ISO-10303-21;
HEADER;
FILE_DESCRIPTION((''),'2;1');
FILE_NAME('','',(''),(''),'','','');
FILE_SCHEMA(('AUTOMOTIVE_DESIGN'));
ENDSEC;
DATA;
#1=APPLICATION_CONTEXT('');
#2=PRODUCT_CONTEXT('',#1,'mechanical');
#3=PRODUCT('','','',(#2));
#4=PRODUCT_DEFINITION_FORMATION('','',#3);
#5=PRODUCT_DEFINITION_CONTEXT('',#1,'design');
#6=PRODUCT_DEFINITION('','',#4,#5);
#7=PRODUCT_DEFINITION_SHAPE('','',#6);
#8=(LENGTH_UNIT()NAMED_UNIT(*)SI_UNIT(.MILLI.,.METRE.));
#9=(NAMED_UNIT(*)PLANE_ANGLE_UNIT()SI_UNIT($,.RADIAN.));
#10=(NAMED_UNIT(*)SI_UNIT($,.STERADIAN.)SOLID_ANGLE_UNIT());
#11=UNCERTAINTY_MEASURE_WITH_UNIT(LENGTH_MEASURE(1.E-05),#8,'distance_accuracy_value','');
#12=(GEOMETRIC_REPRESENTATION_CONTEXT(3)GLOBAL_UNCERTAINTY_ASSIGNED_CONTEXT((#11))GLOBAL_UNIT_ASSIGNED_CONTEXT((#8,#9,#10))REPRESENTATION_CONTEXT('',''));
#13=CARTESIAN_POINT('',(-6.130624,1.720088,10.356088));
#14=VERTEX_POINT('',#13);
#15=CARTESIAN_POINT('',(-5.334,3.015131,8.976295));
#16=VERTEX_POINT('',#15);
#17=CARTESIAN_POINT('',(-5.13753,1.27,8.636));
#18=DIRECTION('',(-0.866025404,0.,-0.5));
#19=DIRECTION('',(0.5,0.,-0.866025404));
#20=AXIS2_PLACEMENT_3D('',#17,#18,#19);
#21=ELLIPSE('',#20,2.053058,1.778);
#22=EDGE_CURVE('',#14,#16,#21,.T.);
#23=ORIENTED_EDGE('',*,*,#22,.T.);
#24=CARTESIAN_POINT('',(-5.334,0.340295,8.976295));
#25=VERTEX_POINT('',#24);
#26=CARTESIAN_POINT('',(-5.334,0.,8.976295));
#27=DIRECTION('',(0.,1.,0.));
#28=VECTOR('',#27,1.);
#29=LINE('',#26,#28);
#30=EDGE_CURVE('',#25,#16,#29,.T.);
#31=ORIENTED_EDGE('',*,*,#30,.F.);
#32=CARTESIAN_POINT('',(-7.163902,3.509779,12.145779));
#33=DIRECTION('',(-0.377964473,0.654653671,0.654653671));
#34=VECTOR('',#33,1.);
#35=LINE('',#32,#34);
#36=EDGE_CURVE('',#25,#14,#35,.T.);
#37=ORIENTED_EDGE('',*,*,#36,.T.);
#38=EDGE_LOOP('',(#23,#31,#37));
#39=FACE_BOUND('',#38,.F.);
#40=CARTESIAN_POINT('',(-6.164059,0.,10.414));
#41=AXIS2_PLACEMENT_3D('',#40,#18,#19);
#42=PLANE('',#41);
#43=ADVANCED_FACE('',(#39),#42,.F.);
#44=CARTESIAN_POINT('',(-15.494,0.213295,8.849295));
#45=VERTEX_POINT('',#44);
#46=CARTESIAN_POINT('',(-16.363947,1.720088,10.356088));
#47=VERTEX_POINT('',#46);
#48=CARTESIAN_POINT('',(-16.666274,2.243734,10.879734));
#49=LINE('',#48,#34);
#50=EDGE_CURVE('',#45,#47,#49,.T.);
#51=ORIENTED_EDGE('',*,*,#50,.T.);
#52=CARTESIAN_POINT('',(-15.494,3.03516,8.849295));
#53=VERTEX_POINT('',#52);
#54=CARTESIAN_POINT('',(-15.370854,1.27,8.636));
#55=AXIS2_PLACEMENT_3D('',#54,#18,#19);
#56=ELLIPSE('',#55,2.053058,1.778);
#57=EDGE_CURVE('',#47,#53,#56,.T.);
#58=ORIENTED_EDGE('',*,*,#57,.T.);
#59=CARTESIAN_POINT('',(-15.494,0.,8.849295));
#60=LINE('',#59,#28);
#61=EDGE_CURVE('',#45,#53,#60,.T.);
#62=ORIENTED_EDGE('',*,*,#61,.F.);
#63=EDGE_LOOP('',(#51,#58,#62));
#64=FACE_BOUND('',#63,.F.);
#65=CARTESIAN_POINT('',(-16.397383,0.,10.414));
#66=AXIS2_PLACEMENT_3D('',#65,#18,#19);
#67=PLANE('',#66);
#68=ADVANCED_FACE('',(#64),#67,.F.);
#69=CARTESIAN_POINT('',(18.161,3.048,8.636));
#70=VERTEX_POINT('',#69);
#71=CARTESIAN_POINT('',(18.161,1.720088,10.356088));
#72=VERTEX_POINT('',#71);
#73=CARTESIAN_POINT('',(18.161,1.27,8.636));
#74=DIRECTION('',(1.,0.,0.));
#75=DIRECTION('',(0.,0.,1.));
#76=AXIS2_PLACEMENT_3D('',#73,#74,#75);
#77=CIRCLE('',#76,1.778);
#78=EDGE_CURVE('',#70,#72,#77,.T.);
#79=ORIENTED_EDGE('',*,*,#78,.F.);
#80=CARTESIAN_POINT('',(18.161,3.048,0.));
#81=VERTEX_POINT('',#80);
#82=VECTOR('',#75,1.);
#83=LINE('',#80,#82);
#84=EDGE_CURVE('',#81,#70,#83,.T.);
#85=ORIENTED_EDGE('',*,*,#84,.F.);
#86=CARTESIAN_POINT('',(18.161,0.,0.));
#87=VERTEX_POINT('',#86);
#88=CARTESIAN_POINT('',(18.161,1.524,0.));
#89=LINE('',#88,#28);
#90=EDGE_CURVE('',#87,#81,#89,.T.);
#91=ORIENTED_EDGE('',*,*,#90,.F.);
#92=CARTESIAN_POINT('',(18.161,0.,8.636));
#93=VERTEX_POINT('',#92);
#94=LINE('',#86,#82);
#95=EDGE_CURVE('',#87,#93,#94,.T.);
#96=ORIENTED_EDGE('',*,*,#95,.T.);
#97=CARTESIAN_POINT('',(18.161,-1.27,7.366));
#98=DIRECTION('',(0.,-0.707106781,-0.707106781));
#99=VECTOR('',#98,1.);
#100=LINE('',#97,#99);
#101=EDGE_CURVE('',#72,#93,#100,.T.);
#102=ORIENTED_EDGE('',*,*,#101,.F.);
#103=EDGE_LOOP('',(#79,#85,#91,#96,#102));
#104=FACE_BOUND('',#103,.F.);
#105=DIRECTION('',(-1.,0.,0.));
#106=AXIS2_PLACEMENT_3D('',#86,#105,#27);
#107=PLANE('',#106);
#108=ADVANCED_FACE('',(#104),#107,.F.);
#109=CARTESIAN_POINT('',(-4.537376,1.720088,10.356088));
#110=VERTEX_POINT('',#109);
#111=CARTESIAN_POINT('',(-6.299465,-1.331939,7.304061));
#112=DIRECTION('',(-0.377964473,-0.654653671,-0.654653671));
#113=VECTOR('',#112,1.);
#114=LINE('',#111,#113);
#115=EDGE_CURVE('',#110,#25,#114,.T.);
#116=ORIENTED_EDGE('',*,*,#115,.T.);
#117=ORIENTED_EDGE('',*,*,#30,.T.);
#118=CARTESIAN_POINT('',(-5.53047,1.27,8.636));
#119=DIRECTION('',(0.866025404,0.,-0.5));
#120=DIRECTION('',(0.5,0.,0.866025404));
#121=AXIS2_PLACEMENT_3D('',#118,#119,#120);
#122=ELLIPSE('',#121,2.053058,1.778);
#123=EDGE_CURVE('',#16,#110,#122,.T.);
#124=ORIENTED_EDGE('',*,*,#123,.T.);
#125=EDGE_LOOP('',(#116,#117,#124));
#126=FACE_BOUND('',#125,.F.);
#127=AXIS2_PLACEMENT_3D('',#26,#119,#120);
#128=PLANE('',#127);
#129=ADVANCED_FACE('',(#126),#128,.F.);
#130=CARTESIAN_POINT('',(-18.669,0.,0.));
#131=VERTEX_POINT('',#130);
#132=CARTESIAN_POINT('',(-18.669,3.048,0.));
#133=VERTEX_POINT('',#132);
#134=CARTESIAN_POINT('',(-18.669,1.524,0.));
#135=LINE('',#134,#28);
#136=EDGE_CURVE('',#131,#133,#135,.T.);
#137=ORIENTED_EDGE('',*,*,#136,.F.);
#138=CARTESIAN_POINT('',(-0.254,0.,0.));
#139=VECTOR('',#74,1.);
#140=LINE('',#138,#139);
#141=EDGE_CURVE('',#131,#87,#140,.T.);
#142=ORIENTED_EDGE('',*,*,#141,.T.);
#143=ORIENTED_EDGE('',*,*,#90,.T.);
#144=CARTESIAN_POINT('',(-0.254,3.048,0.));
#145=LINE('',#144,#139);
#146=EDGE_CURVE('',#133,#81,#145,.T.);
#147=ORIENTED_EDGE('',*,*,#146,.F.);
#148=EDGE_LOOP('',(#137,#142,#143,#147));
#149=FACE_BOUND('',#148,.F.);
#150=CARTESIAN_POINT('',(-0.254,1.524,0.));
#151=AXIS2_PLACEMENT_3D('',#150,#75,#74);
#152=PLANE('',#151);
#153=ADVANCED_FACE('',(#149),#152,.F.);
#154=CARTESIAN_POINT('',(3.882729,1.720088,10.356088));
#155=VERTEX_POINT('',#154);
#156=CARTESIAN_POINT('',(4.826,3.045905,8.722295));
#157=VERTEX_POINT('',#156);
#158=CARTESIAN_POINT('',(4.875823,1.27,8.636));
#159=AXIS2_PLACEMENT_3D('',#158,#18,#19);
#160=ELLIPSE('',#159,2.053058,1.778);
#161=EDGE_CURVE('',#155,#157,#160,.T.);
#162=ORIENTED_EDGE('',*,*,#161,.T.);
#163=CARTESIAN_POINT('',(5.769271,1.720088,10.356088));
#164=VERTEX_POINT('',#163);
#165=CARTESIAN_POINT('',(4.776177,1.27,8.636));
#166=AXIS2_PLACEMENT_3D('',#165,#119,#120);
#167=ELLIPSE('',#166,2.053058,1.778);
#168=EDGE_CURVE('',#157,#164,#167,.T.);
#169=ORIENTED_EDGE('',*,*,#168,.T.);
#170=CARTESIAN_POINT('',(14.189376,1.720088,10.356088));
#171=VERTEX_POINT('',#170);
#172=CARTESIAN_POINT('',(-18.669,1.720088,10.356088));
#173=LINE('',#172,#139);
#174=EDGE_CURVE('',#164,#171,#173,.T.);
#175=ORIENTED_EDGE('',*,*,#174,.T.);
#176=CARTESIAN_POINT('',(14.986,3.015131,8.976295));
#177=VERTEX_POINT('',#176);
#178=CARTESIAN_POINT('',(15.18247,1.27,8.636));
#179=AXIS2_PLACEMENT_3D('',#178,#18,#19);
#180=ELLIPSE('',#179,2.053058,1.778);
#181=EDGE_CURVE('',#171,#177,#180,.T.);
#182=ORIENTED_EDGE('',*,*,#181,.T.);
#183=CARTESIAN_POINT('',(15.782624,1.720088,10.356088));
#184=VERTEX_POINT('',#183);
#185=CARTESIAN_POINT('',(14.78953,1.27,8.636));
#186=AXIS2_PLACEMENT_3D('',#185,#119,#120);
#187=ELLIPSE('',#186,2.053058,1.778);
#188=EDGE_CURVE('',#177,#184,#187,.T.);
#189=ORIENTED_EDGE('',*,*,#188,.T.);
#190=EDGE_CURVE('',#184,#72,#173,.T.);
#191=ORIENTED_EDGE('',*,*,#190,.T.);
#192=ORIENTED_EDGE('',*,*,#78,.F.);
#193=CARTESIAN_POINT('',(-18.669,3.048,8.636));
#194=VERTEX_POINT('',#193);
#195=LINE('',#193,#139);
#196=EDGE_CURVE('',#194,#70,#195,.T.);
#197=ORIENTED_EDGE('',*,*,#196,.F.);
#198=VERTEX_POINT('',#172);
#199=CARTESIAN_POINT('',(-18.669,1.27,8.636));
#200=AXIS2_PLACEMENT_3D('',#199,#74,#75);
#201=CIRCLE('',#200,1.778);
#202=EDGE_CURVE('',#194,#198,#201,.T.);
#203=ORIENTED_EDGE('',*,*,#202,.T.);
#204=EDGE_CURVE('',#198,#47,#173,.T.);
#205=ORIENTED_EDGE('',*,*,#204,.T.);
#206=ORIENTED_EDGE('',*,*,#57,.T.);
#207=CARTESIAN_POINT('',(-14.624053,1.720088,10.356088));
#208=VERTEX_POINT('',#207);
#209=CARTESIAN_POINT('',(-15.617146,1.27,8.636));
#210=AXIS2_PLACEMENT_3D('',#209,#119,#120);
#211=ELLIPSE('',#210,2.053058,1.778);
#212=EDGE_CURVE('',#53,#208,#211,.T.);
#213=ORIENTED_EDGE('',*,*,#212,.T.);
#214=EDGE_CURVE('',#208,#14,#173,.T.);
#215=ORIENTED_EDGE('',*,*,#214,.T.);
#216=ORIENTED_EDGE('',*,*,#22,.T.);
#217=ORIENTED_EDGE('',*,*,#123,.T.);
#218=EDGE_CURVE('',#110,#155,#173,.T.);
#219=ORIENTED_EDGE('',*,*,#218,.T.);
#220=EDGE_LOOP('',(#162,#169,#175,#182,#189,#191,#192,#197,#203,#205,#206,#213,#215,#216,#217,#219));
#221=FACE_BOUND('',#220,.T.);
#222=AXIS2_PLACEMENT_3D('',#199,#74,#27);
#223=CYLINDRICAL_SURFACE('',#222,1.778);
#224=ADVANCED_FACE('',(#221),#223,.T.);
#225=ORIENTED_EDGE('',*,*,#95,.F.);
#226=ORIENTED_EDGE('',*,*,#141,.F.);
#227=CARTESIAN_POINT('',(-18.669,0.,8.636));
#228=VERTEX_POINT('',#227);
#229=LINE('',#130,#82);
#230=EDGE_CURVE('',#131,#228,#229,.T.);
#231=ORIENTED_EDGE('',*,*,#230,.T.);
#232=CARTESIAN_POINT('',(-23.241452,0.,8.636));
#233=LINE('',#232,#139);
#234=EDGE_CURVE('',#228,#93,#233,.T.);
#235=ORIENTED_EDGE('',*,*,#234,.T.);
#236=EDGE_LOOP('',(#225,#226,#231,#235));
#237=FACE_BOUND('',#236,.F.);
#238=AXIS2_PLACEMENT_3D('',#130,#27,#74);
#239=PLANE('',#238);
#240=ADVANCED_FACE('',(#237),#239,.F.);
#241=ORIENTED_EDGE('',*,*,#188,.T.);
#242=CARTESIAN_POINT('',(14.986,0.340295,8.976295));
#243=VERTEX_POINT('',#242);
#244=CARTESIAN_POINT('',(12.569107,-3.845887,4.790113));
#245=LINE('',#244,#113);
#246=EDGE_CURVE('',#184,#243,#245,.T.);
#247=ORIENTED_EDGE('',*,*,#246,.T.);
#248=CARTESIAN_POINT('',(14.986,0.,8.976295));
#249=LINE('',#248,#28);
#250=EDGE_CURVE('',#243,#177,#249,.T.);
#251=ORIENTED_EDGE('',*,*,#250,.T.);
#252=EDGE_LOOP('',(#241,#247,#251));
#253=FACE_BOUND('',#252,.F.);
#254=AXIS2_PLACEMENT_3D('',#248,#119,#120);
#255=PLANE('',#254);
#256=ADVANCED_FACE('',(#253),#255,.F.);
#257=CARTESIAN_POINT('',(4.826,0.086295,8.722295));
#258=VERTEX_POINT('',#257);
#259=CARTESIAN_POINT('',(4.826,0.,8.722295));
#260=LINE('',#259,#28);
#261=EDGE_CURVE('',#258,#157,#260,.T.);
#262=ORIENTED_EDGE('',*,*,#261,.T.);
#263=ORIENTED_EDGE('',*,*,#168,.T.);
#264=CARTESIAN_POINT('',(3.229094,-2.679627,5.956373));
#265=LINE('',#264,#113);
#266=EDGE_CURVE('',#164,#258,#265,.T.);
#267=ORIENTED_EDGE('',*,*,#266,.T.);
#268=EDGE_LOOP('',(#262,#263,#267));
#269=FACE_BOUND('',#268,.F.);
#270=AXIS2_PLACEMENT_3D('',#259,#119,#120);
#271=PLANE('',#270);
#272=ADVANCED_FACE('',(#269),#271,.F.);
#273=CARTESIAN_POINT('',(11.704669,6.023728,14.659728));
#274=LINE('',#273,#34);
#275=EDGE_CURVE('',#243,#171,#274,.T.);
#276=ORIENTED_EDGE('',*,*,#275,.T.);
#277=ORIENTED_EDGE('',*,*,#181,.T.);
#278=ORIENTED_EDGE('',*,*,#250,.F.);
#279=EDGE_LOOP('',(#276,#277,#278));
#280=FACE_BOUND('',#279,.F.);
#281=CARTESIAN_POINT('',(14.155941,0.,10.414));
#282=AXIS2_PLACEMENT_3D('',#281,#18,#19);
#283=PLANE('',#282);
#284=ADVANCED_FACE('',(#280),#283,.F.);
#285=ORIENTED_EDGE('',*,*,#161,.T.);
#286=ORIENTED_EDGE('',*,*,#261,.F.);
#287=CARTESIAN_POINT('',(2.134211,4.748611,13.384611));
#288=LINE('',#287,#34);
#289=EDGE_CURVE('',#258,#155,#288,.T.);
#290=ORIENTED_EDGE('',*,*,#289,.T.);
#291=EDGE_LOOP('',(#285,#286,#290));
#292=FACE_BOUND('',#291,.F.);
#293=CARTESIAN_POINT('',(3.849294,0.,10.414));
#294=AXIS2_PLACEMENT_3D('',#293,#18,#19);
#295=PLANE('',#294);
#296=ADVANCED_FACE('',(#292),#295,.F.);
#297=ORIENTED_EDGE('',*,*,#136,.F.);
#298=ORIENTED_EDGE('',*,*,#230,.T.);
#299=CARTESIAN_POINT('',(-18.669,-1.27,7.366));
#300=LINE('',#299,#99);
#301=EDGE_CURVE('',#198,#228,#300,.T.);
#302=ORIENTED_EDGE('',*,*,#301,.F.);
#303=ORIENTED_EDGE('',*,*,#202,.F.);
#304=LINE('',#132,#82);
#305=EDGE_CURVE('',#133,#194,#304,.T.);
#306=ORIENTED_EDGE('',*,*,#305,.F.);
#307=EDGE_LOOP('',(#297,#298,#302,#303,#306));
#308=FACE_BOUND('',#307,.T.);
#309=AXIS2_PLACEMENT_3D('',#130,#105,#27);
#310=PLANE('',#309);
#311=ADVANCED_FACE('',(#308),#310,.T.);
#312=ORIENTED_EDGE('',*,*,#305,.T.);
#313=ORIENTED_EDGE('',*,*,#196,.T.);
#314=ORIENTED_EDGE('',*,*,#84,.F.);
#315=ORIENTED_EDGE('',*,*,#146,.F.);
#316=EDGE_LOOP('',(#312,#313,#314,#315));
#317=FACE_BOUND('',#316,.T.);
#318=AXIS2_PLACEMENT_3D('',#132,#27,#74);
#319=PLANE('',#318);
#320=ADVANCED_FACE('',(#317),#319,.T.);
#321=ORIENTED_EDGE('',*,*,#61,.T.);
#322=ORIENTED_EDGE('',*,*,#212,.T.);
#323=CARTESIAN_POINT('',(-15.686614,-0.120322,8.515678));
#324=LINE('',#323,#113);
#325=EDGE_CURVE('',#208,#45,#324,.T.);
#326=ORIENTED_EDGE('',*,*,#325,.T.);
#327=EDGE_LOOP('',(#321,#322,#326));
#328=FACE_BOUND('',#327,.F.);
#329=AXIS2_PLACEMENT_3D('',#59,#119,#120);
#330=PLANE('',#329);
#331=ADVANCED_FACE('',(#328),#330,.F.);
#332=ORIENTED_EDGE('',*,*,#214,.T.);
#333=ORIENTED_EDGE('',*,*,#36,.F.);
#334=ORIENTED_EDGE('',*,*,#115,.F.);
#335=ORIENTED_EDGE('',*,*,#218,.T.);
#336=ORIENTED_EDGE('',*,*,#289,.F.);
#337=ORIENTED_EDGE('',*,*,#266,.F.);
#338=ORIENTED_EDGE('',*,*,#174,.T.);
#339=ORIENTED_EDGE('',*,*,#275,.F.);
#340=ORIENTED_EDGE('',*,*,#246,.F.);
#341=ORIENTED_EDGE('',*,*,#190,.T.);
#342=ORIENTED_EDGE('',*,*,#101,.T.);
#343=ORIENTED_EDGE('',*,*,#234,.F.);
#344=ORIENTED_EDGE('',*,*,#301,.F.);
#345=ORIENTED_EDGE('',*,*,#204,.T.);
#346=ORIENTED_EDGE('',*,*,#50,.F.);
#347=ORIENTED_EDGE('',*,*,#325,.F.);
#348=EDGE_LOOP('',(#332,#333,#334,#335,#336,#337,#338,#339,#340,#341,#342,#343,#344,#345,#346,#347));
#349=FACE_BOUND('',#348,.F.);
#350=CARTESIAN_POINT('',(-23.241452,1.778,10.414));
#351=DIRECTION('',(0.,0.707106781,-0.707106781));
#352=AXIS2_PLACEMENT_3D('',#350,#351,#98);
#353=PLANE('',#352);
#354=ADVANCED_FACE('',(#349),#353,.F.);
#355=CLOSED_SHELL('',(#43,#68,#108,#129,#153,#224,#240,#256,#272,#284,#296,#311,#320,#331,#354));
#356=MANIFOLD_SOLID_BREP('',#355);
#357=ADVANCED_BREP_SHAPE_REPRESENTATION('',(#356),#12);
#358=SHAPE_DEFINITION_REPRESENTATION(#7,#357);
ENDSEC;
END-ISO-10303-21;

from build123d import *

# Parameters (mm, degrees)
F0_W        = 36.83
F0_H        = 3.048
F1_DEPTH    = 10.414
F3_R        = 1.778
F4_T1_DEPTH = 45.9749047052
F5_DEPTH    = 25.4


# Not quite as in the source:
# - a fillet or chamfer that OpenCascade refuses, or shapes differently, is made with other operations: its cross-section is extruded or revolved along the edge and cut away or added


with BuildPart() as f1:
    # F0 (on Top) → F1 (new body)
    with BuildSketch(Plane.XY):
        with Locations((-0.254, 1.524)):
            Rectangle(F0_W, F0_H)
    extrude(amount=F1_DEPTH)

    # F3
    f3_edges = [f1.edges().sort_by_distance(p)[0] for p in [
        (-0.254, 3.048, 10.414),
    ]]
    fillet(f3_edges, radius=F3_R)

    # F4: chamfer of 1.778 on 1 edges, made by hand

    # F4_s2 → F4_t1 (cut)
    with BuildSketch(Plane.YZ.offset(-23.2414523526)):
        Polygon((1.778, 10.414), (0, 8.636), (0, 10.414), align=None)
    extrude(amount=F4_T1_DEPTH, mode=Mode.SUBTRACT)

    # F2 (on face) → F5 (cut)
    with BuildSketch(Plane.XZ):
        Polygon((-15.494, 8.8492954744), (-14.5906174209, 10.414), (-16.3973825791, 10.414), align=None)
        Polygon((-4.5039409051, 10.414), (-6.1640590949, 10.414), (-5.334, 8.9762954744), align=None)
        Polygon((5.8027060633, 10.414), (3.8492939367, 10.414), (4.826, 8.7222954744), align=None)
        Polygon((15.8160590949, 10.414), (14.1559409051, 10.414), (14.986, 8.9762954744), align=None)
    extrude(amount=-F5_DEPTH, mode=Mode.SUBTRACT)


solid = f1.part
